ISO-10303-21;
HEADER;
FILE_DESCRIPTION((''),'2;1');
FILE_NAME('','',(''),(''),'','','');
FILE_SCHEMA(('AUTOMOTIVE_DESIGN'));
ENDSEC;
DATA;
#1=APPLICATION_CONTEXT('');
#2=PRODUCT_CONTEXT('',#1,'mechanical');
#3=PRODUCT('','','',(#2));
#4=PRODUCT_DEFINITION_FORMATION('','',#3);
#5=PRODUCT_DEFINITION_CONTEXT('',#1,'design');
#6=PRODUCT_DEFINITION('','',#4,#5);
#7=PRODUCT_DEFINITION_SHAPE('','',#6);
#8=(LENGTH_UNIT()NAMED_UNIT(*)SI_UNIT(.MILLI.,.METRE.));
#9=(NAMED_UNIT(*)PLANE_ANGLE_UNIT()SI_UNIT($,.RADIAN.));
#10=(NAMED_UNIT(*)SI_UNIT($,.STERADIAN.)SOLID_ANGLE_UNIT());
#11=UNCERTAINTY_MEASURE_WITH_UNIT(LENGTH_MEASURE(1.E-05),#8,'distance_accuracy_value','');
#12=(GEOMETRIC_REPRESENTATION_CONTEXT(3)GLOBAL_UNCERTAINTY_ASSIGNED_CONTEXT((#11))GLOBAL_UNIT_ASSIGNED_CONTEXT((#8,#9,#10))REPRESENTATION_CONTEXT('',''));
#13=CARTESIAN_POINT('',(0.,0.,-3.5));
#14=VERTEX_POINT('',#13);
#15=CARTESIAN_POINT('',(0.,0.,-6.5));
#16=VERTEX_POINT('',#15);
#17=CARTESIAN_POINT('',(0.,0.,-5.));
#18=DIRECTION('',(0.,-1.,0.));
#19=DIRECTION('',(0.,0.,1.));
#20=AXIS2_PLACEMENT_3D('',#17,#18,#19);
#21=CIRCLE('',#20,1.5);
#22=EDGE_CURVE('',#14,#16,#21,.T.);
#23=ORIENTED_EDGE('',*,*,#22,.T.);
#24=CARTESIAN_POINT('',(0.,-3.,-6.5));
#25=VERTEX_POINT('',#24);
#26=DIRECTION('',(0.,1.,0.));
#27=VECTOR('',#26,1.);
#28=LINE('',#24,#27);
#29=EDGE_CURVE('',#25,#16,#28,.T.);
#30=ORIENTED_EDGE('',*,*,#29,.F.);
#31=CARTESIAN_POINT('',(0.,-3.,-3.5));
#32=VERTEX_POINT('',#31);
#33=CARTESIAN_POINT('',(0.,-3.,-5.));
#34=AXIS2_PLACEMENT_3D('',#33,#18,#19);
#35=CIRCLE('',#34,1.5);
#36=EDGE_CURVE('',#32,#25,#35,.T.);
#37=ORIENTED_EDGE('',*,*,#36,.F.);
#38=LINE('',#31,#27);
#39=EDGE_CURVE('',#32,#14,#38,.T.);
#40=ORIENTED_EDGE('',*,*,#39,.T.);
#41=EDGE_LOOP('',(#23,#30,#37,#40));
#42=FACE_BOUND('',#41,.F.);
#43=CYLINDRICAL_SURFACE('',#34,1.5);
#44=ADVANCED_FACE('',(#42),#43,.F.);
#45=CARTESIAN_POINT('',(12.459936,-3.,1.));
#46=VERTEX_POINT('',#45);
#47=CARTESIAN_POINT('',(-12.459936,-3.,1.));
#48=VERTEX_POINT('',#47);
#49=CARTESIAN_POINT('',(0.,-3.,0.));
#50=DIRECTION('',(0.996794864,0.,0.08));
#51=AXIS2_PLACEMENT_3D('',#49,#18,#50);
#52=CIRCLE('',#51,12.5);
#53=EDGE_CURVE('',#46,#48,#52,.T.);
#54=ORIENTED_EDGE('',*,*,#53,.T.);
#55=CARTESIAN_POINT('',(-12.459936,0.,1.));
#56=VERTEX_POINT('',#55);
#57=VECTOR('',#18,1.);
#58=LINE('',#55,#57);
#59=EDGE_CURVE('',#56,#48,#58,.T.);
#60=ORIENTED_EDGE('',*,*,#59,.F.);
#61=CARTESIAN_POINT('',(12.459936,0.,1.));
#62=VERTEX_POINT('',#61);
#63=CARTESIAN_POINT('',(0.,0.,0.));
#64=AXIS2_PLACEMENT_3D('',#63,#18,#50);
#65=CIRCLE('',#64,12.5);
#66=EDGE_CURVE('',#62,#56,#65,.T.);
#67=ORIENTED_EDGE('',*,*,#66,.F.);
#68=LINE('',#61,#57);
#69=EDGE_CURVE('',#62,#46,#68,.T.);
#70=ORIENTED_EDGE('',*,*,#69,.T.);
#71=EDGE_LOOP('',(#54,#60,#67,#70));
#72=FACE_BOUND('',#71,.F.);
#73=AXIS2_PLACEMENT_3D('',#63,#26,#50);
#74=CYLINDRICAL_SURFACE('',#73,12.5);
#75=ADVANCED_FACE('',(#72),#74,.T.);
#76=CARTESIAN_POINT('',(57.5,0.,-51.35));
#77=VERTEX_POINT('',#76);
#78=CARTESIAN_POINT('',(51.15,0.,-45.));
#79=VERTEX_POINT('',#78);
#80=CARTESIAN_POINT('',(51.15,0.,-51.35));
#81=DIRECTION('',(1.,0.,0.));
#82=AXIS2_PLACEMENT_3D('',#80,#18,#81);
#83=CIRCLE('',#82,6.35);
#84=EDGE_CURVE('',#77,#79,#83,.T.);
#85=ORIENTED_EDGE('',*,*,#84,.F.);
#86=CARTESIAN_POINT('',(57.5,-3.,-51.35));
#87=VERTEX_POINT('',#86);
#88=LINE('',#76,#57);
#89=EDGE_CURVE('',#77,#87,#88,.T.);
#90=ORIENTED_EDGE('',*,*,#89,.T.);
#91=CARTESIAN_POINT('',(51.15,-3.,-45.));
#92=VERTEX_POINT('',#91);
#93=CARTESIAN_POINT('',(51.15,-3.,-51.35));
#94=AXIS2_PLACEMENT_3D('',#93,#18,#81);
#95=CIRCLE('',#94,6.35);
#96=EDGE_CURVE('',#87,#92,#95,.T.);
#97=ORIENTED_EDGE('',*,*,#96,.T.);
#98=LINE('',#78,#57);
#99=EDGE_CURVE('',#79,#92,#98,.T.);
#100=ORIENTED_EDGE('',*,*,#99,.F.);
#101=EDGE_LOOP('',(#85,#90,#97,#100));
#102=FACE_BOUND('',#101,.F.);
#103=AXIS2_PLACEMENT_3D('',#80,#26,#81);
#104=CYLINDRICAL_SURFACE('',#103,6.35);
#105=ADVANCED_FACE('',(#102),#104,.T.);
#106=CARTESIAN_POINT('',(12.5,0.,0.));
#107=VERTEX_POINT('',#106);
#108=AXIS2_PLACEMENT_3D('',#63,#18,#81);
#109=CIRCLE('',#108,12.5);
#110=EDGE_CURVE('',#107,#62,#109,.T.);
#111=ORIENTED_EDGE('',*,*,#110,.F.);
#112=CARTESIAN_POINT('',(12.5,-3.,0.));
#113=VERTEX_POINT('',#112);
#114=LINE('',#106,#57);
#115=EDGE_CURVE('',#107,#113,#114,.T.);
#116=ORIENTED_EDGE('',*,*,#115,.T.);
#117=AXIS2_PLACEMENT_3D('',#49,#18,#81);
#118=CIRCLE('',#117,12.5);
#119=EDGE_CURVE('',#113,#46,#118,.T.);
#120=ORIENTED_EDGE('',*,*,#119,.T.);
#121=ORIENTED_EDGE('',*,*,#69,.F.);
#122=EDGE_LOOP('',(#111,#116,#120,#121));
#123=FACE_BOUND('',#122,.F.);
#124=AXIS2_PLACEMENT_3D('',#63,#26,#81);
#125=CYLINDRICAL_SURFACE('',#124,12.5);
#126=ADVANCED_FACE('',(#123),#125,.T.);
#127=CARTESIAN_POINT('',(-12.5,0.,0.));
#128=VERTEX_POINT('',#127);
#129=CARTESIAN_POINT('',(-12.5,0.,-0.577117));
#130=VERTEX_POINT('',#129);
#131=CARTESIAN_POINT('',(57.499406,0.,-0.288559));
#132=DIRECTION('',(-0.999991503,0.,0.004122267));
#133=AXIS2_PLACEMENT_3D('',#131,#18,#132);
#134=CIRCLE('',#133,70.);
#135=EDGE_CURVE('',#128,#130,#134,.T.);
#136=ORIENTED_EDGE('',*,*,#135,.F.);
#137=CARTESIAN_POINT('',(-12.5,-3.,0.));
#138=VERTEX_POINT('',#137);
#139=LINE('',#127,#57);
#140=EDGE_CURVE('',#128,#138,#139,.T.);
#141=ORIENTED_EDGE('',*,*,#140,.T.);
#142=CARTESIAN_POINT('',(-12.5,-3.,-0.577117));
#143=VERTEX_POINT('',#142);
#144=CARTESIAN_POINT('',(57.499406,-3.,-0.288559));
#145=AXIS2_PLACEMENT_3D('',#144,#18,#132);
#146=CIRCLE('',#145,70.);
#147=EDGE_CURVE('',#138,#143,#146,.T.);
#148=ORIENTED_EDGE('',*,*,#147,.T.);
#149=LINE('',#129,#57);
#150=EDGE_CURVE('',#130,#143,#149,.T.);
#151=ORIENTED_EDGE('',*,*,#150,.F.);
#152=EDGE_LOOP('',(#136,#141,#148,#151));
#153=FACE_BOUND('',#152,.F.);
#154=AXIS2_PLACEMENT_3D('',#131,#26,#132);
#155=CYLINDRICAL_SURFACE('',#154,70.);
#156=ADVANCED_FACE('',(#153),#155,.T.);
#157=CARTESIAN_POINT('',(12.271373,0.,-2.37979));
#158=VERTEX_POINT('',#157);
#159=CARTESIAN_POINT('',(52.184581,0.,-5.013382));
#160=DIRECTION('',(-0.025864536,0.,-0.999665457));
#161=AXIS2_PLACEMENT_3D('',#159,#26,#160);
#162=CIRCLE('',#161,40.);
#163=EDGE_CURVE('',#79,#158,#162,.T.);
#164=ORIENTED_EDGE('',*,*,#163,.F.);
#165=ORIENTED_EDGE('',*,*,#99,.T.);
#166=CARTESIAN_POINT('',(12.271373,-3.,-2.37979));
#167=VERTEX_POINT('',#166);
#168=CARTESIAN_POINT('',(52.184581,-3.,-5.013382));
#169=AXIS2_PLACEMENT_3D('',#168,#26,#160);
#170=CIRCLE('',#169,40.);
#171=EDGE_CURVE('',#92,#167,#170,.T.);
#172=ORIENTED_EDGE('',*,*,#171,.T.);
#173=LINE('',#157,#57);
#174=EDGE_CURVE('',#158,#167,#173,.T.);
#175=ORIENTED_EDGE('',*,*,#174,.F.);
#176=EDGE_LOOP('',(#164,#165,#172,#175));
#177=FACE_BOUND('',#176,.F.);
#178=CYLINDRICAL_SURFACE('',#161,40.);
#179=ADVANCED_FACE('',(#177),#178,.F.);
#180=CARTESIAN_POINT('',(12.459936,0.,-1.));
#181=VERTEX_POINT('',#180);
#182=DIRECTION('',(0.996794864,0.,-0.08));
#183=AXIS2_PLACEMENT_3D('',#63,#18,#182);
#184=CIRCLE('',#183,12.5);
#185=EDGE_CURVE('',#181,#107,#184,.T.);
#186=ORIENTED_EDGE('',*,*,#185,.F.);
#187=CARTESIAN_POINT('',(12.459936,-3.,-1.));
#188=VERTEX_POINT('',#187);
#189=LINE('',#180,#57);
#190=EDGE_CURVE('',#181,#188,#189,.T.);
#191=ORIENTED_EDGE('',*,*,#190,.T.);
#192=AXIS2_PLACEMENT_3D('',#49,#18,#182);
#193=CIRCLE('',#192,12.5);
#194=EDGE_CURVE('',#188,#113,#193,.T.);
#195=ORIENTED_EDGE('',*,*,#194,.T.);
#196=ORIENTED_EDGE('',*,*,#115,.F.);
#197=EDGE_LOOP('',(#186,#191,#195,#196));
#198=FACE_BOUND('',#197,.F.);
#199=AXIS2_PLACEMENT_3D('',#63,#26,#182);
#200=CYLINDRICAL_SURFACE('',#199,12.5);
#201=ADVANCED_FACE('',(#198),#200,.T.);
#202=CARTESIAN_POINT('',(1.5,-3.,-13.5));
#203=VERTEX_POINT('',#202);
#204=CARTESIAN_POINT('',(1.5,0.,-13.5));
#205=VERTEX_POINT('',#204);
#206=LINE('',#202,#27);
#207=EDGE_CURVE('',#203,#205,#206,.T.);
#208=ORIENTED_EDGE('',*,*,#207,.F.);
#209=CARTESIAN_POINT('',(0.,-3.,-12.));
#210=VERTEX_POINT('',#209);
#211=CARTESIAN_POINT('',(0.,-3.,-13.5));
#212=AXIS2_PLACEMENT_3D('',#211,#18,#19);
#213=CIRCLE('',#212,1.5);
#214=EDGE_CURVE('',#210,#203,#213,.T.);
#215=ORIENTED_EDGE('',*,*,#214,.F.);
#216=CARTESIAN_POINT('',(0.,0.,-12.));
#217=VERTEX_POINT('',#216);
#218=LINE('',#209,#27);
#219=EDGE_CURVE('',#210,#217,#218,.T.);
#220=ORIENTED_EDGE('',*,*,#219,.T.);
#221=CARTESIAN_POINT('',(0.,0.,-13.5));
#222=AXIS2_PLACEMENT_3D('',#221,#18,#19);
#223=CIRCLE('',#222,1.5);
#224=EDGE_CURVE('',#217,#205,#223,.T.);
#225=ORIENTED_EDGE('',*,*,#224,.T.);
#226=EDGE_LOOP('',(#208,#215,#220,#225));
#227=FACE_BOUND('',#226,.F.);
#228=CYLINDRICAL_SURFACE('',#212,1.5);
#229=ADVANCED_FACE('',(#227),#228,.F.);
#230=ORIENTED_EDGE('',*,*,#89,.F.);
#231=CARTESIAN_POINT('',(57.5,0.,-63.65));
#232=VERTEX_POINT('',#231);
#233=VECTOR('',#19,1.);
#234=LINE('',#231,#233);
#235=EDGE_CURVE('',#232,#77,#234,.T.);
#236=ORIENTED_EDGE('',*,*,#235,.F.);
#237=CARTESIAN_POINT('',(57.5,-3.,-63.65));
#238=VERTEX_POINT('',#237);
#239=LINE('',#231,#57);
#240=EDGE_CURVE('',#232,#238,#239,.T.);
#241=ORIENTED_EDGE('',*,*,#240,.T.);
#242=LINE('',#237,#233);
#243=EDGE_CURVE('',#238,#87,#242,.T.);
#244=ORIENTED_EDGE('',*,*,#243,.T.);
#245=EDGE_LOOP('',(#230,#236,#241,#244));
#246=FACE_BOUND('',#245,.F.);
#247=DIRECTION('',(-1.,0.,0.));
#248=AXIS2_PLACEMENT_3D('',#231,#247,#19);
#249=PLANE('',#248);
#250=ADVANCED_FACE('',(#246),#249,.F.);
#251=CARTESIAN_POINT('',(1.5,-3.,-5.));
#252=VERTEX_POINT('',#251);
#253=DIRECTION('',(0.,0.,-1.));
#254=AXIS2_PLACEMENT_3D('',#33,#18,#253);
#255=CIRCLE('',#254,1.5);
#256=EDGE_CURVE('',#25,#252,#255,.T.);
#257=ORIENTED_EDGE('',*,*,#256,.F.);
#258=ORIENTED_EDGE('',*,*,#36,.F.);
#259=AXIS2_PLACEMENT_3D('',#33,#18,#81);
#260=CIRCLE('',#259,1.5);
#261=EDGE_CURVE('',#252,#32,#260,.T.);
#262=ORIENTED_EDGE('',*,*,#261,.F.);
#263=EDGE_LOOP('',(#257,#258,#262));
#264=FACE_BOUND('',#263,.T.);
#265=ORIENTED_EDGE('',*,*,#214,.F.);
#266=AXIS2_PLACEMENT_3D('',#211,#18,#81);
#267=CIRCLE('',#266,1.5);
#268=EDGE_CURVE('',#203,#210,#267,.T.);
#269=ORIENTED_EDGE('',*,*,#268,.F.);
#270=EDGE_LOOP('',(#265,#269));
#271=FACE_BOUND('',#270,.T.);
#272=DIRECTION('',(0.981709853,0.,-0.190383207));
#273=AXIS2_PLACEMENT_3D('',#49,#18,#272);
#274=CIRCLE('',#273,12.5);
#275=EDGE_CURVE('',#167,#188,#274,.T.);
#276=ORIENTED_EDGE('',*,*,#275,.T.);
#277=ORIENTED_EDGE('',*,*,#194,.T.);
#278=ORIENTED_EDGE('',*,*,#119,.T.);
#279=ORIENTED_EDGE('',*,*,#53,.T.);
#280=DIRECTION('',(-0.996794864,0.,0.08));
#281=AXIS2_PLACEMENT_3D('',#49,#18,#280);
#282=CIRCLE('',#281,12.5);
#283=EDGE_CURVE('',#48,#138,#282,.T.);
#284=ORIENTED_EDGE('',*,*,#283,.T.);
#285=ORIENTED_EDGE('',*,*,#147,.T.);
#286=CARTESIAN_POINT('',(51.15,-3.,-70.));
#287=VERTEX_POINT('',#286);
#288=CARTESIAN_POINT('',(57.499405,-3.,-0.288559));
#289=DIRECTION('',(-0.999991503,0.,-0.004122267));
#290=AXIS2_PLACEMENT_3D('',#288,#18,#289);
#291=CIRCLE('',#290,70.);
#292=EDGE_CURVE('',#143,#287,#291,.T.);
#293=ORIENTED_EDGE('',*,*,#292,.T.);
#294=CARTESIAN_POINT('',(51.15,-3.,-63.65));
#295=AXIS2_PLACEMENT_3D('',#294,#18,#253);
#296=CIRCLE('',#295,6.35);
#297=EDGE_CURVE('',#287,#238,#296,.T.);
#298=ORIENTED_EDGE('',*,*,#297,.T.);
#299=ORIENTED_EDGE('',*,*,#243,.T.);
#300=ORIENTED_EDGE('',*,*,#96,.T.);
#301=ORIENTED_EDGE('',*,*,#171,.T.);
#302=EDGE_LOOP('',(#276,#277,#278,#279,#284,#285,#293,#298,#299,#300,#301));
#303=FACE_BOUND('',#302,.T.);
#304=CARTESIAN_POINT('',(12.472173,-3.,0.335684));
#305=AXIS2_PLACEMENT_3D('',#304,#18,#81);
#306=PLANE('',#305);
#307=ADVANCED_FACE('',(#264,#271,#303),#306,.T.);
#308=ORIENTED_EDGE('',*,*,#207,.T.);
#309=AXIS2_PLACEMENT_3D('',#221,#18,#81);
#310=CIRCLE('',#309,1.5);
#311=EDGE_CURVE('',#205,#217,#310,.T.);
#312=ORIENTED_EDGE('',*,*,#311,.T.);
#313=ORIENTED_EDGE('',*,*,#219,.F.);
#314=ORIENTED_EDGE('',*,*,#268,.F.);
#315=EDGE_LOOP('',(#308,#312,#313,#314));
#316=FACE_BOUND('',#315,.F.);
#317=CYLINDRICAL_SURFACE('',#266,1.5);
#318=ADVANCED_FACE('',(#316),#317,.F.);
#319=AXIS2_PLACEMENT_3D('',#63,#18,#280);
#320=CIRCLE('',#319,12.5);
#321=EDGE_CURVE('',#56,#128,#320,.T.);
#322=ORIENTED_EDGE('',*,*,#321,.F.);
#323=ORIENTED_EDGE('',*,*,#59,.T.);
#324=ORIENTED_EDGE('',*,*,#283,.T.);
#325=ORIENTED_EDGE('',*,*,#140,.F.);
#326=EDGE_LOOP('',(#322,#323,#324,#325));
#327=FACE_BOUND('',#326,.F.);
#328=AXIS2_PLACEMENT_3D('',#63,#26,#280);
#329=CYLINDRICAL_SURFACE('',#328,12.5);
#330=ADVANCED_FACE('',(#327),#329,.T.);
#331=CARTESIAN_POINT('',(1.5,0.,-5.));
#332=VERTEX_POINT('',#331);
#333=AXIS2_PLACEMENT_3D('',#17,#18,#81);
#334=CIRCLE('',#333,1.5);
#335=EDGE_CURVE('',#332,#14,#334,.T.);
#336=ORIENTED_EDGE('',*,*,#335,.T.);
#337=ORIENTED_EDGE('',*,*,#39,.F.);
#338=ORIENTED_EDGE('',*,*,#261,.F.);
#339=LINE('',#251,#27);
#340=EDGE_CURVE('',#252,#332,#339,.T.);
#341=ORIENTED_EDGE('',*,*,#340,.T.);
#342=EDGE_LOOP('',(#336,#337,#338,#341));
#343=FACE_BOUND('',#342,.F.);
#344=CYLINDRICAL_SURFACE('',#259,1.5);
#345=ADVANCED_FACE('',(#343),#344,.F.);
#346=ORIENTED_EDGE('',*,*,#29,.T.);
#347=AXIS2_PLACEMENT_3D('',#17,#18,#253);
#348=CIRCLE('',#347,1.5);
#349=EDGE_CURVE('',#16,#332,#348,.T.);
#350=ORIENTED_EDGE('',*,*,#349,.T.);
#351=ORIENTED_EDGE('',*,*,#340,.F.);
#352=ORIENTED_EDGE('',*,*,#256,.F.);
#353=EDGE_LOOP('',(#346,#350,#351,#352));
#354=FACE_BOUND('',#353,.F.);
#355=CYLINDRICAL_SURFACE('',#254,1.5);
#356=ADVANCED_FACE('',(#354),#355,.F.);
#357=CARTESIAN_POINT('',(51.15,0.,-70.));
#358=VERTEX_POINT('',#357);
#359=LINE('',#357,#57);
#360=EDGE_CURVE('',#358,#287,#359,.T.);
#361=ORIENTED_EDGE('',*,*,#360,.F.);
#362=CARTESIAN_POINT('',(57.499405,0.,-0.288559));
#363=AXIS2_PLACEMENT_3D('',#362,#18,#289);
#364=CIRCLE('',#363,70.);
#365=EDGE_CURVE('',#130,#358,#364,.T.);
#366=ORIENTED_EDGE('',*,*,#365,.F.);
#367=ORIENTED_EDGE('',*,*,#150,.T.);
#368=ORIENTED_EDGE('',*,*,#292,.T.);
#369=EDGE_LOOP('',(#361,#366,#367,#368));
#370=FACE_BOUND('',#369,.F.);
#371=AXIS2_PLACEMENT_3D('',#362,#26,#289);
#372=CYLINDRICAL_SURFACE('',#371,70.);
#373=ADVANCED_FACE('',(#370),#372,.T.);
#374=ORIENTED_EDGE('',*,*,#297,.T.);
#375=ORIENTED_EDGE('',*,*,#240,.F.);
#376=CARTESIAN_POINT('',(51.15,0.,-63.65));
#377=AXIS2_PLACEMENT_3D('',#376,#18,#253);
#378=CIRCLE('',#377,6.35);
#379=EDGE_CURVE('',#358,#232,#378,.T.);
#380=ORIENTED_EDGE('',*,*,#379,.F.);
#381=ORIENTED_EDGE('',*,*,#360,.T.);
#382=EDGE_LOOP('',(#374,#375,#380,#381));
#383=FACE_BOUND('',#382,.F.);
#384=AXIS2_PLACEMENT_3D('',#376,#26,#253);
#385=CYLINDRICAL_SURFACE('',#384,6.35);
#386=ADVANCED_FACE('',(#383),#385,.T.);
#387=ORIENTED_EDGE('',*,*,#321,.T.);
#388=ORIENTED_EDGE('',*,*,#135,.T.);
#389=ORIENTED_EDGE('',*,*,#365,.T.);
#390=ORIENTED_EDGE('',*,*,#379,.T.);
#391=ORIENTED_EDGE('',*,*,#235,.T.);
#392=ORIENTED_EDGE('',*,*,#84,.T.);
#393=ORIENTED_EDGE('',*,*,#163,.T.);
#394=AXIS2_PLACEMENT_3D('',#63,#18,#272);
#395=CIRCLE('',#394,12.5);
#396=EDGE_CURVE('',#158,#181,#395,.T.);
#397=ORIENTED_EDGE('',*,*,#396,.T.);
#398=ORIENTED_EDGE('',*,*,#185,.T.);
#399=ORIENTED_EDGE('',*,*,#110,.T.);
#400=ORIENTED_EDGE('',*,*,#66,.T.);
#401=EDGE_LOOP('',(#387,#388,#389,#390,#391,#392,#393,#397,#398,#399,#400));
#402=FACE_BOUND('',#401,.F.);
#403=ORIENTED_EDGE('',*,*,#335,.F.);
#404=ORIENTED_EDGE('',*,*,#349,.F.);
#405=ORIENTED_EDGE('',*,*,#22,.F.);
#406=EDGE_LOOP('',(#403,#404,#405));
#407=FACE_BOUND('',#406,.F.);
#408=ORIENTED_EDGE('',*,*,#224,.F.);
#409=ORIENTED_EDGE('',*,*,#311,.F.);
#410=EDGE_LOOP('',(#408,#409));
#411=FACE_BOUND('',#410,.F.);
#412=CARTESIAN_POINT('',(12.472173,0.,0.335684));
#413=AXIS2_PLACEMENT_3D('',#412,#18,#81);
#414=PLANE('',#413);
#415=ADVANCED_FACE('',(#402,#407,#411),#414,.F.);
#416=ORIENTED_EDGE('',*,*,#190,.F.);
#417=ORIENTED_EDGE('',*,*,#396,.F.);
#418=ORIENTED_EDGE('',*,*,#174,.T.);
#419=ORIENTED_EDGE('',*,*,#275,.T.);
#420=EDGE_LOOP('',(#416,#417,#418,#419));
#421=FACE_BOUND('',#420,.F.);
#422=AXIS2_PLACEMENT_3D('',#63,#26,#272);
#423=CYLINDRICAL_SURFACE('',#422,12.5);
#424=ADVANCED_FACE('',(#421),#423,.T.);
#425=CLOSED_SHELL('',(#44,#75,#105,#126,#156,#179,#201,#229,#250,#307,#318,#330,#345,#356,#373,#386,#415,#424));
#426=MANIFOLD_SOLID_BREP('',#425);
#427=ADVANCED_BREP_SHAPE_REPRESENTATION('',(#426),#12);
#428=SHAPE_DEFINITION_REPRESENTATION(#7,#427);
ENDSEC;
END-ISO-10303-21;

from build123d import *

# Parameters (mm, degrees)
F0_R     = 1.5
F1_DEPTH = 3
F3_DEPTH = 381


with BuildPart() as f1:
    # F0 (on Front) → F1 (new body)
    with BuildSketch(Plane.XZ):
        with BuildLine():
            ThreePointArc((12.4599357944, -0.3280291537), (12.4796291372, -0.163973202), (12.5, 0))
            ThreePointArc((12.5, 0), (12.4899799325, 0.5004011242), (12.4599357944, 1))
            Line((12.4599357944, 1), (12.4599357944, -0.3280291537))
        make_face()
        with BuildLine():
            ThreePointArc((12.4599357944, -1), (12.4899799325, -0.5004011242), (12.5, 0))
            ThreePointArc((12.5, 0), (12.4796291372, -0.163973202), (12.4599357944, -0.3280291537))
            Line((12.4599357944, -0.3280291537), (12.4599357944, -1))
        make_face()
        with BuildLine():
            Line((12.4599357944, -0.3280291537), (12.4599357944, 1))
            ThreePointArc((12.4599357944, 1), (0, 12.5), (-12.4599357944, 1))
            Line((-12.4599357944, 1), (-12.4599357944, -1))
            ThreePointArc((-12.4599357944, -1), (-0.696307501, -12.4805911664), (12.2713731569, -2.3797900839))
            ThreePointArc((12.2713731569, -2.3797900839), (12.3524414608, -1.3526953053), (12.4599357944, -0.3280291537))
        make_face()
        Circle(F0_R, mode=Mode.SUBTRACT)
        with BuildLine():
            ThreePointArc((12.2713731569, -2.3797900839), (12.3848845687, -1.6925230338), (12.4599357944, -1))
            Line((12.4599357944, -1), (12.4599357944, -0.3280291537))
            ThreePointArc((12.4599357944, -0.3280291537), (12.3524414608, -1.3526953053), (12.2713731569, -2.3797900839))
        make_face()
        with BuildLine():
            Line((-12.4599357944, -1), (-12.4599357944, 1))
            ThreePointArc((-12.4599357944, 1), (-12.4899799325, 0.5004011242), (-12.5, 0))
            ThreePointArc((-12.5, 0), (-12.4899799325, -0.5004011242), (-12.4599357944, -1))
        make_face()
        with BuildLine():
            ThreePointArc((51.15, -45), (22.6329157643, -31.9707379741), (12.2713731569, -2.3797900839))
            ThreePointArc((12.2713731569, -2.3797900839), (-0.696307501, -12.4805911664), (-12.4599357944, -1))
            ThreePointArc((-12.4599357944, -1), (-12.4899799325, -0.5004011242), (-12.5, 0))
            Line((-12.5, 0), (-12.5, -0.5771173286))
            ThreePointArc((-12.5, -0.5771173286), (5.9031905044, -47.5942731711), (51.15, -70))
            ThreePointArc((51.15, -70), (55.6401280605, -68.1401280605), (57.5, -63.65))
            Line((57.5, -63.65), (57.5, -51.35))
            ThreePointArc((57.5, -51.35), (55.6401280605, -46.8598719395), (51.15, -45))
        make_face()
        with BuildLine():
            Line((-12.5, -0.5771173286), (-12.5, 0))
            ThreePointArc((-12.5, 0), (-12.5005947604, -0.2885586643), (-12.5, -0.5771173286))
        make_face()
        Circle(F0_R)
    extrude(amount=F1_DEPTH)

    # F2 (on face) → F3 (cut, symmetric)
    with BuildSketch(Plane.XZ.offset(3)):
        with BuildLine():
            ThreePointArc((1.5, -5), (1.0606601718, -3.9393398282), (0, -3.5))
            Line((0, -3.5), (0, -5))
            Line((0, -5), (0, -6.5))
            ThreePointArc((0, -6.5), (1.0606601718, -6.0606601718), (1.5, -5))
        make_face()
        with BuildLine():
            ThreePointArc((1.5, -13.5), (1.0606601718, -12.4393398282), (0, -12))
            ThreePointArc((0, -12), (-1.0606601718, -14.5606601718), (1.5, -13.5))
        make_face()
        with BuildLine():
            Line((0, -5), (0, -3.5))
            ThreePointArc((0, -3.5), (-1.5, -5), (0, -6.5))
            Line((0, -6.5), (0, -5))
        make_face()
    extrude(amount=F3_DEPTH, both=True, mode=Mode.SUBTRACT)


solid = f1.part
